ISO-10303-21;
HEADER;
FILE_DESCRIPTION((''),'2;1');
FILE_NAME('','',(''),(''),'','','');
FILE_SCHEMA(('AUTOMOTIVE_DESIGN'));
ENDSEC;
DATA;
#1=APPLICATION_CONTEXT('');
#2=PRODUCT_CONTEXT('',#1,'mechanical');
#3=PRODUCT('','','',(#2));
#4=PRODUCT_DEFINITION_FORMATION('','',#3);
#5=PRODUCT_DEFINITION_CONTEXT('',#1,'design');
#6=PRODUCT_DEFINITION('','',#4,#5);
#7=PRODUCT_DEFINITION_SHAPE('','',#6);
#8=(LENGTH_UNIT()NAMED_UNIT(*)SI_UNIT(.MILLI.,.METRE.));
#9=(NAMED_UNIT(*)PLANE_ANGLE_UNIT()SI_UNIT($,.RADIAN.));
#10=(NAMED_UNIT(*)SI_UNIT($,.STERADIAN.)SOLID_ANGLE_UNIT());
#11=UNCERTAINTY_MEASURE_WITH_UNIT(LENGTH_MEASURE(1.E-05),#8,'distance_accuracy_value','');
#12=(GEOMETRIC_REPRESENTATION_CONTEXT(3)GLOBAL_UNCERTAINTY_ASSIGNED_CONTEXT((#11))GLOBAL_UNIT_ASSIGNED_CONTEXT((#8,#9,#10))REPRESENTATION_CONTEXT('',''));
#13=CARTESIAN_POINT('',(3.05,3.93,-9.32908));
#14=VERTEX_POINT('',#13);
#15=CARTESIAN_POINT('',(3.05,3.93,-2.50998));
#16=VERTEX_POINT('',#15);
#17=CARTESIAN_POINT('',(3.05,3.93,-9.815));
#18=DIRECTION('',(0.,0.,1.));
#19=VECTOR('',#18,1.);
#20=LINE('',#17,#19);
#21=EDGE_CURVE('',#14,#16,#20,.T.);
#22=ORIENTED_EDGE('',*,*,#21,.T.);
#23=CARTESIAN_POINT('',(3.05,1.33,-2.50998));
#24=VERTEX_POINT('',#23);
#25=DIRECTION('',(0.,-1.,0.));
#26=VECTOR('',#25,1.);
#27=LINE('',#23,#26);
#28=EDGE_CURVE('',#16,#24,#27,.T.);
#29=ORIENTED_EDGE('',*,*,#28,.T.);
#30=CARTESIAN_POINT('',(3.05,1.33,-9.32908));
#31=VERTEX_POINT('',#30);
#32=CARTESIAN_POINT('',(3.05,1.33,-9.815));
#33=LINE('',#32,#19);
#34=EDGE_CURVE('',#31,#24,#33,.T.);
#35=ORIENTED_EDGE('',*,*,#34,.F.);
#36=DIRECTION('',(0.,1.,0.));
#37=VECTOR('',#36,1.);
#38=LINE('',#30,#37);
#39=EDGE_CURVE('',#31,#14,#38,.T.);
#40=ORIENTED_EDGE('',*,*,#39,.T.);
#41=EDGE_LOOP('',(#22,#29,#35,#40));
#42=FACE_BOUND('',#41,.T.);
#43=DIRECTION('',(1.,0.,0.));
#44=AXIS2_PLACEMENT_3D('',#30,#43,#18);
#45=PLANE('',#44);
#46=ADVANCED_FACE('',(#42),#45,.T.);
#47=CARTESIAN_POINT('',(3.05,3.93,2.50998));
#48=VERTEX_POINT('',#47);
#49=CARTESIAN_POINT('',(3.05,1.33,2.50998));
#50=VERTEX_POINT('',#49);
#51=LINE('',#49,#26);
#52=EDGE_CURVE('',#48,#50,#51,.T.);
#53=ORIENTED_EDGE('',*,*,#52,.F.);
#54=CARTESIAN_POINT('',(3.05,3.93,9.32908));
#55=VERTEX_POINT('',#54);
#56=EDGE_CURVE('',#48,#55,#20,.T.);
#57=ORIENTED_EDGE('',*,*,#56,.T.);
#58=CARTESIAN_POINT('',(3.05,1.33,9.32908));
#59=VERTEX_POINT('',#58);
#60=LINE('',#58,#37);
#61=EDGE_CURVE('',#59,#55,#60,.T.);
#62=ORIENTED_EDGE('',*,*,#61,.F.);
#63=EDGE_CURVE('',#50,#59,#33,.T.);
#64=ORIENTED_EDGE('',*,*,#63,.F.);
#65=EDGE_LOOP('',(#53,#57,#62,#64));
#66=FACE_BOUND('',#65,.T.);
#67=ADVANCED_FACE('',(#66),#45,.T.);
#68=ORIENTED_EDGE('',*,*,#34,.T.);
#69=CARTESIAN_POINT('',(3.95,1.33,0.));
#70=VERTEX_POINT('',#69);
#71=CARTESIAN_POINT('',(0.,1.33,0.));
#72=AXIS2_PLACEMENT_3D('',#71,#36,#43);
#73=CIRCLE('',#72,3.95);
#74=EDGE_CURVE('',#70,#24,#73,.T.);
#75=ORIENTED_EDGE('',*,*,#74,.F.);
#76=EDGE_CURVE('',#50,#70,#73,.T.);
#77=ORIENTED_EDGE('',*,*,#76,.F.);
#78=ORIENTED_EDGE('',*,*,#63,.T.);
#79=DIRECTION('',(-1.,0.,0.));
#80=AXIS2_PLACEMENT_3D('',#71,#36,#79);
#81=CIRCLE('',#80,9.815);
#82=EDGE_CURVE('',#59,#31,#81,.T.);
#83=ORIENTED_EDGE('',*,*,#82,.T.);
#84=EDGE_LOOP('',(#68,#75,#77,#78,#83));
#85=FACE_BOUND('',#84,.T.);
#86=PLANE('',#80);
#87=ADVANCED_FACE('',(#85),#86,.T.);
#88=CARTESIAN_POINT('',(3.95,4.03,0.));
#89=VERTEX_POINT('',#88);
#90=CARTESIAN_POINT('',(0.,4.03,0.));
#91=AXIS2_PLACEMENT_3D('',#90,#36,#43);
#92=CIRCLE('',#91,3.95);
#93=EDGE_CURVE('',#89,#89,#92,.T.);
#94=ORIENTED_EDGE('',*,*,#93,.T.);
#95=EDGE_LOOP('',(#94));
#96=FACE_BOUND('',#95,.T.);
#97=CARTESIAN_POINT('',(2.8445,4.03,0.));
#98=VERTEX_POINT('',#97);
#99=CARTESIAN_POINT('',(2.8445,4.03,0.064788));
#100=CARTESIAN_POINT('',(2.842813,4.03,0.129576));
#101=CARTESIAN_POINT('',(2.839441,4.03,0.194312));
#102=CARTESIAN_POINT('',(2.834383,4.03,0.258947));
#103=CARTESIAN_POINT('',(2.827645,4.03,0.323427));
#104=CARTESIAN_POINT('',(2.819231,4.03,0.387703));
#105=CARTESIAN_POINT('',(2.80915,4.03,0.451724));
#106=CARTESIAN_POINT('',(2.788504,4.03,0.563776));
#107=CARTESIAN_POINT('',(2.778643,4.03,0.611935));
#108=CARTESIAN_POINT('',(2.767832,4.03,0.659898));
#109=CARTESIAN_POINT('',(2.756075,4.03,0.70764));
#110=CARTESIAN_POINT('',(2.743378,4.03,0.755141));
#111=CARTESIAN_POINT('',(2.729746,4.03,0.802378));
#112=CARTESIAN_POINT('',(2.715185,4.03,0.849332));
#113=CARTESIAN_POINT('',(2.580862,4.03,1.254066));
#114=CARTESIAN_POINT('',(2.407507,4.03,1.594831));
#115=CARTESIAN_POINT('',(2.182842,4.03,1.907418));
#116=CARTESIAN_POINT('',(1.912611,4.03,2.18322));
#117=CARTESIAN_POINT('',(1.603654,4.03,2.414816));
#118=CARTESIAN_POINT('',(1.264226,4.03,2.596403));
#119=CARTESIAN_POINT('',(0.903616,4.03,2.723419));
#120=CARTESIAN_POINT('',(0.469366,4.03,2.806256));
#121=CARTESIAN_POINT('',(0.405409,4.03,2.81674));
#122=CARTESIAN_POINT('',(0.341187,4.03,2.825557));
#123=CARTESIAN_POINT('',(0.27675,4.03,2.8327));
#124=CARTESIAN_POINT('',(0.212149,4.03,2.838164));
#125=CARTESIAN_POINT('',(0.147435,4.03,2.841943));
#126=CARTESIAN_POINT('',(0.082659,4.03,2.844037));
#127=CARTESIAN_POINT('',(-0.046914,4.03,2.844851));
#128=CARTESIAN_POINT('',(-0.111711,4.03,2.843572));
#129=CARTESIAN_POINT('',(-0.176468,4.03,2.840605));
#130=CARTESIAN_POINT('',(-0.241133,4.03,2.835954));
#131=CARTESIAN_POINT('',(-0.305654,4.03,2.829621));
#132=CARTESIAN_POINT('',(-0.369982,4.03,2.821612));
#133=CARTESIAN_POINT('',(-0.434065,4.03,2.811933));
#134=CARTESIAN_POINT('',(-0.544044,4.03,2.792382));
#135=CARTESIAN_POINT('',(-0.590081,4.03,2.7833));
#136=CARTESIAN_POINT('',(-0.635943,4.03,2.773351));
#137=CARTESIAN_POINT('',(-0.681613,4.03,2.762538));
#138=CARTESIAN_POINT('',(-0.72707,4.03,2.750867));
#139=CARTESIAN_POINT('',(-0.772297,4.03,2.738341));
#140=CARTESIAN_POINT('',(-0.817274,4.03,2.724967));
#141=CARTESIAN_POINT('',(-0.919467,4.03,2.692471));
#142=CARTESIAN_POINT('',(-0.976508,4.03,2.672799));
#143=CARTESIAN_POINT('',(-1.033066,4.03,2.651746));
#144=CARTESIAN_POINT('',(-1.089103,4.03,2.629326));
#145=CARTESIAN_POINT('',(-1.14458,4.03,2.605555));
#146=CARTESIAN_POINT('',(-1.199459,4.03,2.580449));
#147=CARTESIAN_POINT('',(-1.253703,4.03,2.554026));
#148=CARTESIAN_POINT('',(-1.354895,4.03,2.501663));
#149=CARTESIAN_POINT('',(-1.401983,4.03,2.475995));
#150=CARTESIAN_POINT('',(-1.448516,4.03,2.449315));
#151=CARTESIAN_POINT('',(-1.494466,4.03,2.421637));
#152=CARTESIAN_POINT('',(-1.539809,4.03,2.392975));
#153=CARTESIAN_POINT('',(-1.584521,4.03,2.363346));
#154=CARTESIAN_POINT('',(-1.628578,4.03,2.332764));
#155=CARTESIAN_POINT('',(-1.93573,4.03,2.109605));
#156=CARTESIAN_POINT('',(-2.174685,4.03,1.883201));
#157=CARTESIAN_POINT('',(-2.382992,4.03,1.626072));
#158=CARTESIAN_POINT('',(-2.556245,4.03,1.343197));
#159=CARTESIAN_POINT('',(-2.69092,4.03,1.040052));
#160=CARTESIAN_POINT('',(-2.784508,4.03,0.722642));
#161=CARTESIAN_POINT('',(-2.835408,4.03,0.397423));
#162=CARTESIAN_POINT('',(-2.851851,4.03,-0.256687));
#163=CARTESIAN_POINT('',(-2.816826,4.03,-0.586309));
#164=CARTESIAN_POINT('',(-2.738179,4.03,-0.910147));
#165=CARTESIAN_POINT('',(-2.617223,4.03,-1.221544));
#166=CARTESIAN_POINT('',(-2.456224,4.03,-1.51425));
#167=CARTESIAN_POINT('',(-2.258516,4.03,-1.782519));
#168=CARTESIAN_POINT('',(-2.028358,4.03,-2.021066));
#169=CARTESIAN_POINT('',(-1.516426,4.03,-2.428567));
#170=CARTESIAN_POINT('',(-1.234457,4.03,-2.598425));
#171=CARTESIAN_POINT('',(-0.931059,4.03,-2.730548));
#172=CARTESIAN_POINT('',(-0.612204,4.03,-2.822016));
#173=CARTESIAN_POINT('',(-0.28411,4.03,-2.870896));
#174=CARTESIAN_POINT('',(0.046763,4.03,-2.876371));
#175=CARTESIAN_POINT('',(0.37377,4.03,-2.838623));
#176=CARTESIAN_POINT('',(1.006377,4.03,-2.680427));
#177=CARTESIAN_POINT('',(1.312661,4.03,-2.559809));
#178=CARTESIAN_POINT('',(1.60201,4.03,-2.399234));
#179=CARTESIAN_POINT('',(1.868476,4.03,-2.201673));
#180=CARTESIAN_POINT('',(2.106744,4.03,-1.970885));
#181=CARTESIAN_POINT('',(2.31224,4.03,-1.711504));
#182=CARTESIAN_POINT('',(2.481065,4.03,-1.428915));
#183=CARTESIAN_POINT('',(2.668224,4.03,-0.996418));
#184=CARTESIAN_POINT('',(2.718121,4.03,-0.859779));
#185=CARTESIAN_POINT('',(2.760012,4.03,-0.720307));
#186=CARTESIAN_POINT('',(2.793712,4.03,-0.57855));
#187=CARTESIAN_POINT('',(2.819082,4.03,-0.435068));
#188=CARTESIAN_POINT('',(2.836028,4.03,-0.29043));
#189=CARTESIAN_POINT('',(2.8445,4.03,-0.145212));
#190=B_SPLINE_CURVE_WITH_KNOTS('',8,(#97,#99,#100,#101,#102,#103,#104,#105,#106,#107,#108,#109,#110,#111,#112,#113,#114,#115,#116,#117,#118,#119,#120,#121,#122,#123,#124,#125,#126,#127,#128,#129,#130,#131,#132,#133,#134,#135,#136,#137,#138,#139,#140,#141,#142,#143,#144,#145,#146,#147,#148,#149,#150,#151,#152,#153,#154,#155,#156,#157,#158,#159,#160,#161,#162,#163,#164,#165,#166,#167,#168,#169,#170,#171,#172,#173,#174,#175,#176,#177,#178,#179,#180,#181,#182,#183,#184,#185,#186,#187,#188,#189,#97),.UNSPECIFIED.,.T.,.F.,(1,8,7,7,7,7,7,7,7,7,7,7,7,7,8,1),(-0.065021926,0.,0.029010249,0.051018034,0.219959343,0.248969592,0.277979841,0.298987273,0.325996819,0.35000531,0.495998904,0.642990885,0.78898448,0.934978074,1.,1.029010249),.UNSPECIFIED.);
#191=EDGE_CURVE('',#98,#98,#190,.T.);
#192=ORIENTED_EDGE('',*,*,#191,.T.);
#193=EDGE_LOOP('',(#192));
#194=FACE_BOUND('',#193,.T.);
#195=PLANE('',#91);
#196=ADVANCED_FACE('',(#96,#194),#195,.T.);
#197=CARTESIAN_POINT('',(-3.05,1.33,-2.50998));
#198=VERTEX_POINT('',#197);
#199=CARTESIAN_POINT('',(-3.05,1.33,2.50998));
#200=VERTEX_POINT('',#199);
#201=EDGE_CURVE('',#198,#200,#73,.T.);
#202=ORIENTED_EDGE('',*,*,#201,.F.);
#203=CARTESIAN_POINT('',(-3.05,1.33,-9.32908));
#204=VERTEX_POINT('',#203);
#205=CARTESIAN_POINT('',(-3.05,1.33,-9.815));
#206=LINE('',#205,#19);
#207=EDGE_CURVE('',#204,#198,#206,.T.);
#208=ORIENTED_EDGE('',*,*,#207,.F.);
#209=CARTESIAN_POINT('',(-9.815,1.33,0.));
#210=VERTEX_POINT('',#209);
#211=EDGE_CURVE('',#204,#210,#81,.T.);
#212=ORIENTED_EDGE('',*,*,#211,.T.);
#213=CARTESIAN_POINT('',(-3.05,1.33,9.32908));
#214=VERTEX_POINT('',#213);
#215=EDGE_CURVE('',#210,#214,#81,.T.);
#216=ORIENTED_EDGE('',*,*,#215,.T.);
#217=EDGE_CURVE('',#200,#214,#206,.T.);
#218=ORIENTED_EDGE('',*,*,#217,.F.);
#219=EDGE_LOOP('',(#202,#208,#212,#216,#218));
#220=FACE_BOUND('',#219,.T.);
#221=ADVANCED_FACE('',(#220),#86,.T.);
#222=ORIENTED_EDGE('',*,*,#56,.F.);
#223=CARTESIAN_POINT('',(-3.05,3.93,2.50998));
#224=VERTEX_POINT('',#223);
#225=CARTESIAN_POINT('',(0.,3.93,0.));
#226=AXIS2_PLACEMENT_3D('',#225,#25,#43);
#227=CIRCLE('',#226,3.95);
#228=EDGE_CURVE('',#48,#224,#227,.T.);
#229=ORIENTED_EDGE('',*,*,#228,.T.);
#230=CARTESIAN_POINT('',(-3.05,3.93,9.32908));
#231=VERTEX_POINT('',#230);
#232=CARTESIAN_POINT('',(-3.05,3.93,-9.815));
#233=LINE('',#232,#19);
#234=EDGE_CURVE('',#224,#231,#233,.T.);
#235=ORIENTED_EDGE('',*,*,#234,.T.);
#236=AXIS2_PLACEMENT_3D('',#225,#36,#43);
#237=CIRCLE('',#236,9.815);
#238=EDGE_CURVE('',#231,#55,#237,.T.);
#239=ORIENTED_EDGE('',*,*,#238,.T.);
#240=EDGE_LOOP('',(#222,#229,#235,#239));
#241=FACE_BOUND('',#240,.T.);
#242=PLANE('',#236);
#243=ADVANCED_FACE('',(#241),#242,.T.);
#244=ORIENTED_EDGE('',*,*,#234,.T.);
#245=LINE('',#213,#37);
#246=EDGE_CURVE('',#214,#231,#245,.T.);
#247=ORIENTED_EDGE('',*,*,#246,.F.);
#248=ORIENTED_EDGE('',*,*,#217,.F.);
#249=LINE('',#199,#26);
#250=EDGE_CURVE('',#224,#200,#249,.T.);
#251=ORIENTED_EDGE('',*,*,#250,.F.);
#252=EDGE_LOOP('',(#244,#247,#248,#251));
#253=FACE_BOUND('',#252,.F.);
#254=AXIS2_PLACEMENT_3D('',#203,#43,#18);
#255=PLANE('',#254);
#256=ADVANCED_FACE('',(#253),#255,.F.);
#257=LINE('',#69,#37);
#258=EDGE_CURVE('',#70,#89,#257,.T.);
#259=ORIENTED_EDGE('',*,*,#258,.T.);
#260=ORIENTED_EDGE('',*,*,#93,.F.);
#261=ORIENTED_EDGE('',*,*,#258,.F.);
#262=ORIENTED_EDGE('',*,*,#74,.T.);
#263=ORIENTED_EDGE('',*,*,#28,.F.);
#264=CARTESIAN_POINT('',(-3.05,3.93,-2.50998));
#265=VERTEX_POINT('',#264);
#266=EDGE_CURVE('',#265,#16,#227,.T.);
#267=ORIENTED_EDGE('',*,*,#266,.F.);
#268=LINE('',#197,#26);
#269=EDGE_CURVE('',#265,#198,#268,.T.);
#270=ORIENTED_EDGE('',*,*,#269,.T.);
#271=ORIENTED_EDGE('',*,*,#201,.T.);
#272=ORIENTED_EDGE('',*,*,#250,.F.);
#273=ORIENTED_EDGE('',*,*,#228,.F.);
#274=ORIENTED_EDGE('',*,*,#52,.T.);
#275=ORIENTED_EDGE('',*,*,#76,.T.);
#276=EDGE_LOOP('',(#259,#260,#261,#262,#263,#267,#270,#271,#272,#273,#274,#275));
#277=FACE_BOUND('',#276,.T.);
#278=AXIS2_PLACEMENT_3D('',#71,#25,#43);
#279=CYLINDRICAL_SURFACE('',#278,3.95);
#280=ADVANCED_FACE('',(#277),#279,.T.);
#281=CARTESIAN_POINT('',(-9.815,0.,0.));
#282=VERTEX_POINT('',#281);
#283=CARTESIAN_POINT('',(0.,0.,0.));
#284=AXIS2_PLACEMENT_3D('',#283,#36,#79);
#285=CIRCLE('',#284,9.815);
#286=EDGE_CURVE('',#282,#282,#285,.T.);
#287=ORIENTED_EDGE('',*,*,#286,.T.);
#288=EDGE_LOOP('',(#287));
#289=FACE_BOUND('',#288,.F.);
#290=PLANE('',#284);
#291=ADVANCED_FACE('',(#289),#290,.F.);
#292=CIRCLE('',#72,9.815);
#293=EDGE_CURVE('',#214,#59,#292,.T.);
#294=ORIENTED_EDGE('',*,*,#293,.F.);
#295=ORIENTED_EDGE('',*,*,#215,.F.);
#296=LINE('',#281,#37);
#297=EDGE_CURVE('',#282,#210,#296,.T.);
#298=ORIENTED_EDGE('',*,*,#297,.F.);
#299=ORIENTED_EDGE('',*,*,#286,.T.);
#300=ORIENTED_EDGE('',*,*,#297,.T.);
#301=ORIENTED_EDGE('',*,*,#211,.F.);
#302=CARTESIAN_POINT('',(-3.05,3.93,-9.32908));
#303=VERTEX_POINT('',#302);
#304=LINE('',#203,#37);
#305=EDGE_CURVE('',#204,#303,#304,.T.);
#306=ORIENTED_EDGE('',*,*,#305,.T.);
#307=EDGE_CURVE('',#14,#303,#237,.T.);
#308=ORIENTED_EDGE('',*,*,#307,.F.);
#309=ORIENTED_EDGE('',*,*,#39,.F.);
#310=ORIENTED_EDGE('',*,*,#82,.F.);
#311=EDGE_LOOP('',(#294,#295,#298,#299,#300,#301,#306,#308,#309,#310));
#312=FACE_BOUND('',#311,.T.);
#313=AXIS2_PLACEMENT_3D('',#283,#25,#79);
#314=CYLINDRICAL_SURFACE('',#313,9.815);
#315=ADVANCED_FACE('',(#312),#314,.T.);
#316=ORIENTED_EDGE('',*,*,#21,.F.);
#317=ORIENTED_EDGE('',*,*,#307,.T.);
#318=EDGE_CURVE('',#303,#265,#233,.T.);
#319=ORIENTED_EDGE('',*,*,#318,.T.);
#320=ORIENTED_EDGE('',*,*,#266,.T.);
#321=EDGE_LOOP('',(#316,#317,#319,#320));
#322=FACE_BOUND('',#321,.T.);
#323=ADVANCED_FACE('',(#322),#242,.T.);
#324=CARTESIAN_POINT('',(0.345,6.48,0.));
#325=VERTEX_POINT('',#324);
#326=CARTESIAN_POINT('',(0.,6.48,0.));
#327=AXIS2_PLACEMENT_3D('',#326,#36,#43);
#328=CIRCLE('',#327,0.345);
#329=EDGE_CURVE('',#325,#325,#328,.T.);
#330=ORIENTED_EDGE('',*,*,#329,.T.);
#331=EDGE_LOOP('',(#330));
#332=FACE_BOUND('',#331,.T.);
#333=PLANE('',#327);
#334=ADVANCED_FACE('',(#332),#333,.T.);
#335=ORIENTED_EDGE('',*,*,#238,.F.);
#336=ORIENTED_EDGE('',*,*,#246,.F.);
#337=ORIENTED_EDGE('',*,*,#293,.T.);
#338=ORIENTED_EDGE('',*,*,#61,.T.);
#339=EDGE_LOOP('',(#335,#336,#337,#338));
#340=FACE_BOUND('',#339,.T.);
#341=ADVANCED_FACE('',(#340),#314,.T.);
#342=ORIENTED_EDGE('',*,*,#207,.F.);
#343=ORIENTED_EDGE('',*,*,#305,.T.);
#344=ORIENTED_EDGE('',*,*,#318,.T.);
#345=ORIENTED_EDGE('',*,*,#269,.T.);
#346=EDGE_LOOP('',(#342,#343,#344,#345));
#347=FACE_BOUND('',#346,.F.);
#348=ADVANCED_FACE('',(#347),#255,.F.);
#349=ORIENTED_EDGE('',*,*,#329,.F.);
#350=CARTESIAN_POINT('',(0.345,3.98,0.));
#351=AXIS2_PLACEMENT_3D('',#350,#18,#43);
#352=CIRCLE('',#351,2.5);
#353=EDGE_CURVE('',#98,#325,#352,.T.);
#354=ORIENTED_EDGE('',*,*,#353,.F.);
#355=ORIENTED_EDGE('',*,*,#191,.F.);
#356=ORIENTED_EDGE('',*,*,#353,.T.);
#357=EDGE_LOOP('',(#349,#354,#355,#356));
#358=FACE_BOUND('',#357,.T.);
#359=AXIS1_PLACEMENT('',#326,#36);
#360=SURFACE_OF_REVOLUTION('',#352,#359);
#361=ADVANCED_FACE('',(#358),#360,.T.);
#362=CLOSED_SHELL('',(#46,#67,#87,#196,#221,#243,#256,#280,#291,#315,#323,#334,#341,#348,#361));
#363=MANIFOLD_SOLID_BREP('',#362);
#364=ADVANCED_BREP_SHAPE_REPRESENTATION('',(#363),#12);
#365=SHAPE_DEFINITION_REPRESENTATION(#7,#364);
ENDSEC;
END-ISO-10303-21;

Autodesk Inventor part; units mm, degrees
ref_plane "YZ Plane" through (0, 0, 0) normal (1, 0, 0) x (0, 1, 0)
ref_plane "XZ Plane" through (0, 0, 0) normal (0, 1, 0) x (-1, 0, 0)
ref_plane "XY Plane" through (0, 0, 0) normal (0, 0, 1) x (1, 0, 0)
sketch "Эскиз1" plane through (0, 0, 0) normal (0, 1, 0) x (-1, 0, 0)
  circle A0 centre (0, 0) radius 9.815
  dimension "d0" = 19.63
extrude "Выдавливание1" add sketch "Эскиз1" along normal blind 1.33
sketch "Эскиз2" plane through (0, 1.33, 0) normal (0, 1, 0) x (1, 0, 0)
  circle A0 centre (0, 0) radius 3.95
  dimension "d3" = 7.9
extrude "Выдавливание2" add sketch "Эскиз2" along normal blind 2.7
sketch "Эскиз3" plane through (0, 4.03, 0) normal (0, 1, 0) x (1, 0, 0)
  circle A0 centre (0, 0) radius 2.845
  dimension "d6" = 5.69
extrude "Выдавливание3" add sketch "Эскиз3" along normal blind 2.45
fillet "Сопряжение1" radius 2.5 1 edges at (-2.845, 6.48, 0)
sketch "Эскиз4" plane through (0, 1.33, 0) normal (0, 1, 0) x (1, 0, 0)
  circle A0 centre (0, 0) radius 9.815 projected
  line L0 (3.05, 9.815) -> (3.05, -9.815)
  line L1 (-3.05, 9.815) -> (-3.05, -9.815)
  point P0 (-3.05, 9.3291)
  point P1 (-3.05, -9.3291)
  point P2 (3.05, -9.3291)
  point P3 (3.05, 9.3291)
extrude "Выдавливание4" add sketch "Эскиз4" along normal blind 2.6 contours L0 A0 L1
